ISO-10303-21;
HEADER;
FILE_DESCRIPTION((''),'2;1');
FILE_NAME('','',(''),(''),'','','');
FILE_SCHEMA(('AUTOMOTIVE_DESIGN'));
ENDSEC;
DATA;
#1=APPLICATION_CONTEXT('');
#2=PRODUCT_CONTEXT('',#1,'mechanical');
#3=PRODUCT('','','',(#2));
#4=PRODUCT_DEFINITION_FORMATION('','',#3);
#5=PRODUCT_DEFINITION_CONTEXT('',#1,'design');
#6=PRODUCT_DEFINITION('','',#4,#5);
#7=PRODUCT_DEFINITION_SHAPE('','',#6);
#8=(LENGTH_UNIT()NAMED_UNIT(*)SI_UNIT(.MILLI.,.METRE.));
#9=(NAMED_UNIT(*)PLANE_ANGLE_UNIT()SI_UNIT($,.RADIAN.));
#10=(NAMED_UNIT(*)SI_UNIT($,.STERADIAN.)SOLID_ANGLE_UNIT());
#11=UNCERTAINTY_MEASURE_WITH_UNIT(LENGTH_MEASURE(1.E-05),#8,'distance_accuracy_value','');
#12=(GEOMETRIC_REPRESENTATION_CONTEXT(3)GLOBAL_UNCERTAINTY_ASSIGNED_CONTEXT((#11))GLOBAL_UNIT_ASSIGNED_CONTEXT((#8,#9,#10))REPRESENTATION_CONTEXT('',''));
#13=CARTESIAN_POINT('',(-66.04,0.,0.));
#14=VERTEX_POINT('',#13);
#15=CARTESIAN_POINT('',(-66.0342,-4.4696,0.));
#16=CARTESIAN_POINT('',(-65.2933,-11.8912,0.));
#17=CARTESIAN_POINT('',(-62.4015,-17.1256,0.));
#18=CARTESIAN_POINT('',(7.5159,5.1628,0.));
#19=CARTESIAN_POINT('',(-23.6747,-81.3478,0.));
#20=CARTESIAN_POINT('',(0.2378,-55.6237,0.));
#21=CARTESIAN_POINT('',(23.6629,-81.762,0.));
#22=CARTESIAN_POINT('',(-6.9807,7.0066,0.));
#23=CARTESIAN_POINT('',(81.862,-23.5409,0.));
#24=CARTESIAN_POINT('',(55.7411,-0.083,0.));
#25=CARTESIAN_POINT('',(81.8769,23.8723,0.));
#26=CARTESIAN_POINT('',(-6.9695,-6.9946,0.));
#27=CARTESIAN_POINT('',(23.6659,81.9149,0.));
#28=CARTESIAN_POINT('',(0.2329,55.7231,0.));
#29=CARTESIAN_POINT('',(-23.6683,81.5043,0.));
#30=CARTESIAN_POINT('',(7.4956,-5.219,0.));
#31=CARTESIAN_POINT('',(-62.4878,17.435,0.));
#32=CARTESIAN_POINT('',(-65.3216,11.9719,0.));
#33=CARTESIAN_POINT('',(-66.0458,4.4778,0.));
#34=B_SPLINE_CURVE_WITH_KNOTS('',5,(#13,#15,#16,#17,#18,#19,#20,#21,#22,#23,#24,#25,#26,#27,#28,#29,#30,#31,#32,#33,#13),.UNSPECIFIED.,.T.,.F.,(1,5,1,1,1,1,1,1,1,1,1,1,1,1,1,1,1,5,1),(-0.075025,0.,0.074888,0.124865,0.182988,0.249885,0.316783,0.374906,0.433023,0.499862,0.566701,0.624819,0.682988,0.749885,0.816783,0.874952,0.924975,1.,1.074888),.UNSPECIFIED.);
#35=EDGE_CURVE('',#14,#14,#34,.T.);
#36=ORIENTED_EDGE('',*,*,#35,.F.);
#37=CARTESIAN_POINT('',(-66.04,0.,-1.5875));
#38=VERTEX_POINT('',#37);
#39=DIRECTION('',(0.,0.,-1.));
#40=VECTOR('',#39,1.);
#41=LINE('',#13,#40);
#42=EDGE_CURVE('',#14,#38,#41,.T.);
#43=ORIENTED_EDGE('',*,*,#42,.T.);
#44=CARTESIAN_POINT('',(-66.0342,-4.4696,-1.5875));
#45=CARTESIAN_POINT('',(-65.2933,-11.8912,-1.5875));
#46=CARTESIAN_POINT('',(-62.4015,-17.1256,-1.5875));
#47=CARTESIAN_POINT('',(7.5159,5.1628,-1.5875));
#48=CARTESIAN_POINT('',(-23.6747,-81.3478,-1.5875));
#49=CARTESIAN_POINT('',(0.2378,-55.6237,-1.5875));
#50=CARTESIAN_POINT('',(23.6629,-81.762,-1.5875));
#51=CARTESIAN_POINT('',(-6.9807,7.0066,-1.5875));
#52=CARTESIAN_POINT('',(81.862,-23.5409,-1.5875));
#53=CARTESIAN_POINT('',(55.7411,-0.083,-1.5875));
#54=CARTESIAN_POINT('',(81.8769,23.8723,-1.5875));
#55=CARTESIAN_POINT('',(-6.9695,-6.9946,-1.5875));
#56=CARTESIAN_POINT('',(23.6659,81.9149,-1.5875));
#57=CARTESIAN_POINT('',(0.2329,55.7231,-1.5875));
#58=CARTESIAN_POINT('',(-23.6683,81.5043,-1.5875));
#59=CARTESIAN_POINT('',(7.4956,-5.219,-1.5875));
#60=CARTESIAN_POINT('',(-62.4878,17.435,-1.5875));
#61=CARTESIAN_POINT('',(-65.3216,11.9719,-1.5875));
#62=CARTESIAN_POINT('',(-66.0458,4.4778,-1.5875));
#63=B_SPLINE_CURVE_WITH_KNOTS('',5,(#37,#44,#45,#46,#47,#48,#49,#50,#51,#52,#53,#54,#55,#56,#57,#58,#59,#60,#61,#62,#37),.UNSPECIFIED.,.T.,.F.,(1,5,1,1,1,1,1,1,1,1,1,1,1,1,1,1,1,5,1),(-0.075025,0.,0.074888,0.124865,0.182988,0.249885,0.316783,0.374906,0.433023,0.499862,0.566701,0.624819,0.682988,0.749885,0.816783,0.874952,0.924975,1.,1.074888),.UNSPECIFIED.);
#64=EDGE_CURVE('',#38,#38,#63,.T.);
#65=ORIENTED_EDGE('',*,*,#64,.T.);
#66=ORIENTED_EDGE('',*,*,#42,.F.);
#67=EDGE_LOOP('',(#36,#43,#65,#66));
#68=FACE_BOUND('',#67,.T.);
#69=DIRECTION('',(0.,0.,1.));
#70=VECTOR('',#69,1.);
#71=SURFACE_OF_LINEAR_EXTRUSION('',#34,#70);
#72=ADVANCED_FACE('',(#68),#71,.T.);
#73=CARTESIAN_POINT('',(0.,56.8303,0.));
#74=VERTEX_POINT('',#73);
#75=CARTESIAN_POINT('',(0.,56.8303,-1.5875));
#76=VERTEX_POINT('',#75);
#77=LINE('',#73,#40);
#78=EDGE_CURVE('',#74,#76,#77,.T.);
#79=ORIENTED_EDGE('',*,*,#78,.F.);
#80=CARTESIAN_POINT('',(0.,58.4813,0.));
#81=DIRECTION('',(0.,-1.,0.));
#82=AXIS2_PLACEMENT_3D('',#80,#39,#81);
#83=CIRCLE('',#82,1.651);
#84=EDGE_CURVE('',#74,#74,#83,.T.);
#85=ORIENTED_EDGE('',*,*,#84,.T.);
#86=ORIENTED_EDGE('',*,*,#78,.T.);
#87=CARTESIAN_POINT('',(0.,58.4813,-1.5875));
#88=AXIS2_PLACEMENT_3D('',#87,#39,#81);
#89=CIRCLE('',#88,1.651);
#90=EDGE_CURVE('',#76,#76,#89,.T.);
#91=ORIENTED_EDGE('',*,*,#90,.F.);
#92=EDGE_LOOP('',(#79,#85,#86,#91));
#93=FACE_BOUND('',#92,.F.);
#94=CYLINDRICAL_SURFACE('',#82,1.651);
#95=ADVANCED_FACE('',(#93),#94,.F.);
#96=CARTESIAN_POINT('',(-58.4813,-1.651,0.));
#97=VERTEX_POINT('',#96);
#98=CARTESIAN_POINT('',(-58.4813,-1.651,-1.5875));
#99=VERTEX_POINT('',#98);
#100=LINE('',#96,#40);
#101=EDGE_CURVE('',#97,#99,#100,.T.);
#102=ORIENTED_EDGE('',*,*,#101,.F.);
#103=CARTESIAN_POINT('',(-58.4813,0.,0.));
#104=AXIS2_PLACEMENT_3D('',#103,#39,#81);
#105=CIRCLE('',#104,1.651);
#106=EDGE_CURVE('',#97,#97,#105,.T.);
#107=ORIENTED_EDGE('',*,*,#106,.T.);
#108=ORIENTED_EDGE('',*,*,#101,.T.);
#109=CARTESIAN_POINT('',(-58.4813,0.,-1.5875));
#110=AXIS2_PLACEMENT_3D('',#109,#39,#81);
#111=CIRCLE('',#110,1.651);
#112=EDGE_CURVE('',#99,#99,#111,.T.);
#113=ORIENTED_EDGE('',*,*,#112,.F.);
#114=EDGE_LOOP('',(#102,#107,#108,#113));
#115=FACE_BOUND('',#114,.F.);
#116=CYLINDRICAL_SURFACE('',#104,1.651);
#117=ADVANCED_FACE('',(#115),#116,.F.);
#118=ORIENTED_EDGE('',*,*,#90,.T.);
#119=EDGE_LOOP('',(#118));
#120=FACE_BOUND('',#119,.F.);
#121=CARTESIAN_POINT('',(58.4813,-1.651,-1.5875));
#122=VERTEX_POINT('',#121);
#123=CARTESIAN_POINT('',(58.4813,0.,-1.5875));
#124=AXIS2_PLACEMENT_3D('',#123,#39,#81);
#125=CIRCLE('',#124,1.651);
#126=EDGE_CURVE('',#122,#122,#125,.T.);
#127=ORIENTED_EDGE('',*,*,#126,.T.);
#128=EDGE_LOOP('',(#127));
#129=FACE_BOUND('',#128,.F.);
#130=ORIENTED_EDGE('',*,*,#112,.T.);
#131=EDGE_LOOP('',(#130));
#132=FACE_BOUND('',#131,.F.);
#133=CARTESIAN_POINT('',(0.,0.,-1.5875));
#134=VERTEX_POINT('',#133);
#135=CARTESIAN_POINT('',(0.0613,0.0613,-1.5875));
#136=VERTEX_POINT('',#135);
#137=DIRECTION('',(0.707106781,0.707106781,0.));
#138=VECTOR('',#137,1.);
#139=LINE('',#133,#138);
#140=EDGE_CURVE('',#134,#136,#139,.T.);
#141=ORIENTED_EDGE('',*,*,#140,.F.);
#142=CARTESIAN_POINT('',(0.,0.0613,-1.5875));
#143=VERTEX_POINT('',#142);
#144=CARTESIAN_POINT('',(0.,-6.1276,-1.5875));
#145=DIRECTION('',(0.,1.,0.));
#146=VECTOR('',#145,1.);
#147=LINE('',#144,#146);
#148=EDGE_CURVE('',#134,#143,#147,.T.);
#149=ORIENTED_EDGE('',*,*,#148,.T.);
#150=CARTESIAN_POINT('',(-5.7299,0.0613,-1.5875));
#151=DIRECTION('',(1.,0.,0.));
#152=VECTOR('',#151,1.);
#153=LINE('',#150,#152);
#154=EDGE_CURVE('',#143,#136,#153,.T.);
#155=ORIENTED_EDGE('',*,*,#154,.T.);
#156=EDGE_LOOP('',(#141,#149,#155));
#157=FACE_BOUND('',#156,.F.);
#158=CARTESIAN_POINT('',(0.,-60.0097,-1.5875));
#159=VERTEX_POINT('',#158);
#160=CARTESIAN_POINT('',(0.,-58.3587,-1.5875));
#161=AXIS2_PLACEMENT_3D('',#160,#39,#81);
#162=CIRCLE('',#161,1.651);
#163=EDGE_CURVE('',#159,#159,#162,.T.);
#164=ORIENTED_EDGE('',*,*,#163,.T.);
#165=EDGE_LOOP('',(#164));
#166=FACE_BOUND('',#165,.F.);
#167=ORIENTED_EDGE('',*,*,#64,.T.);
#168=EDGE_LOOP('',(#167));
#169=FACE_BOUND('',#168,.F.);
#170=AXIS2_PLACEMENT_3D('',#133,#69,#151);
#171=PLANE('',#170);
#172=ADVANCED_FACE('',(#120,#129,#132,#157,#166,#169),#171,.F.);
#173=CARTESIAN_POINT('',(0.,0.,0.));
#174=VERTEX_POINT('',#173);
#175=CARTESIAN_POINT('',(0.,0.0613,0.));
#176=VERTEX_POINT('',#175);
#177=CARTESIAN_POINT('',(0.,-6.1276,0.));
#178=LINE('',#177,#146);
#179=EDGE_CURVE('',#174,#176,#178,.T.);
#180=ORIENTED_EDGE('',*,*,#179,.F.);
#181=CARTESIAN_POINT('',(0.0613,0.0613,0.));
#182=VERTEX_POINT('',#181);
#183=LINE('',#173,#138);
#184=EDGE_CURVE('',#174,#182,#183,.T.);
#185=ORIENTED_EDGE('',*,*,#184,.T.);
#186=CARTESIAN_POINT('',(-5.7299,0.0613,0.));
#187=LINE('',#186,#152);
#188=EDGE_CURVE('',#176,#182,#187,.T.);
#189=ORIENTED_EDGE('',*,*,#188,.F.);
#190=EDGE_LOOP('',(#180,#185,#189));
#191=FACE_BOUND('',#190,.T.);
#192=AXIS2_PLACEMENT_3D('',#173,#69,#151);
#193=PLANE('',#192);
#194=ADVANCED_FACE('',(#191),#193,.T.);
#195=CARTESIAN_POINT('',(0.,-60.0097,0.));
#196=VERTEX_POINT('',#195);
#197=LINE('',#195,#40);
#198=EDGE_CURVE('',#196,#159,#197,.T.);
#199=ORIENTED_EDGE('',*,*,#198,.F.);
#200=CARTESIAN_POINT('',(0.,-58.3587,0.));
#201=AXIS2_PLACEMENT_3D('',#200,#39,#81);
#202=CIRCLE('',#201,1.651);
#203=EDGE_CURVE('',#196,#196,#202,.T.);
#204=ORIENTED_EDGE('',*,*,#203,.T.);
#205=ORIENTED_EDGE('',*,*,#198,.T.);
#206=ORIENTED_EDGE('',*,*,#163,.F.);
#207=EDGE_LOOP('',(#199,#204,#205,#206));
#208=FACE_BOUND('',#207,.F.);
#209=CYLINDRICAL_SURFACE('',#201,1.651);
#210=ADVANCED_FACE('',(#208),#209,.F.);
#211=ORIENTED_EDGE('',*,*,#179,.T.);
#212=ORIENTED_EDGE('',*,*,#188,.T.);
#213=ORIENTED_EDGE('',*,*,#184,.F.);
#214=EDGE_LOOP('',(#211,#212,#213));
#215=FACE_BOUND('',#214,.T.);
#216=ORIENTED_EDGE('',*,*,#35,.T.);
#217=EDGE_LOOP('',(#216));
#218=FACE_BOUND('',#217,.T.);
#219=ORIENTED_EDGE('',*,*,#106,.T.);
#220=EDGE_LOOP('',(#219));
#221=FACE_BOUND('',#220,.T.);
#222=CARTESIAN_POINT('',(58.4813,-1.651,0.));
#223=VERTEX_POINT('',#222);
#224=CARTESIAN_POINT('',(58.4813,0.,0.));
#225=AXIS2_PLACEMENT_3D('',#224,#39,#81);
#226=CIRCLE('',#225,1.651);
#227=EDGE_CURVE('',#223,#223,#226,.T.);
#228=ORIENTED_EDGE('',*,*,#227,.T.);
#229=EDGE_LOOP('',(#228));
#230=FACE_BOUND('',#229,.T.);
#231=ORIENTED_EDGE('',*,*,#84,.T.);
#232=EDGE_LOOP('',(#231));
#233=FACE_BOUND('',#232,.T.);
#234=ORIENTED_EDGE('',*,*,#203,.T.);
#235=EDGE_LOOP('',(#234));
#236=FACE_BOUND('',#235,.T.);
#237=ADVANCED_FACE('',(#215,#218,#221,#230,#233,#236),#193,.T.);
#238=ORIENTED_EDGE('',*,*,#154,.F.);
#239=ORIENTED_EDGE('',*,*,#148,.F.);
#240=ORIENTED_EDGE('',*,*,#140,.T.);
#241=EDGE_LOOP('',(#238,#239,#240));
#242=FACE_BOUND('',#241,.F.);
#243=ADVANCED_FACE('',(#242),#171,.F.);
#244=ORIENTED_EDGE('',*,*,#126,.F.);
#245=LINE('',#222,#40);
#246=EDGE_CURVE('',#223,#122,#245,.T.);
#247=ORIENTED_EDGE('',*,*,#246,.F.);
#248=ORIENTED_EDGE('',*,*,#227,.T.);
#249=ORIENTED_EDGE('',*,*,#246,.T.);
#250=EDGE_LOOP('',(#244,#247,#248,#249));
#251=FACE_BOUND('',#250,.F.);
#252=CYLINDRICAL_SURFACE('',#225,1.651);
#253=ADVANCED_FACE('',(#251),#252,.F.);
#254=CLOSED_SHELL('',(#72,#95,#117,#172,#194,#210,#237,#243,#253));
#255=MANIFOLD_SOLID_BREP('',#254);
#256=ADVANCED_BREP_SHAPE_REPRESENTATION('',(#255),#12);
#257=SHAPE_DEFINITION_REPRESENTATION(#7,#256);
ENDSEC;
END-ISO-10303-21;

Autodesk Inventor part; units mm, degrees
ref_plane "YZ Plane" through (0, 0, 0) normal (1, 0, 0) x (0, 1, 0)
ref_plane "XZ Plane" through (0, 0, 0) normal (0, 1, 0) x (-1, 0, 0)
ref_plane "XY Plane" through (0, 0, 0) normal (0, 0, 1) x (1, 0, 0)
sketch "Sketch1" plane through (0, 0, 0) normal (0, 0, 1) x (1, 0, 0)
  spline S0 degree 5 poles (-66.04, 0) (-66.0342, -4.4696) (-65.2933, -11.8912) (-62.4015, -17.1256) (7.5159, 5.1628) (-23.6747, -81.3478) (0.2378, -55.6237) (23.6629, -81.762) (-6.9807, 7.0066) (81.862, -23.5409) (55.7411, -0.083) (81.8769, 23.8723) (-6.9695, -6.9946) (23.6659, 81.9149) (0.2329, 55.7231) (-23.6683, 81.5043) (7.4956, -5.219) (-62.4878, 17.435) (-65.3216, 11.9719) (-66.0458, 4.4778) (-66.04, 0) knots 0 0 0 0 0 0 0.074888 0.124865 0.182988 0.249885 0.316783 0.374906 0.433023 0.499862 0.566701 0.624819 0.682988 0.749885 0.816783 0.874952 0.924975 1 1 1 1 1 1
  line L0 (0, -6.1276) -> (0, 6.2502)
  line L1 (-5.7299, 0.0613) -> (8.1185, 0.0613)
  line L2 (0, 0) -> (10.1713, 10.1713)
  line L3 (0, 0) -> (14.3844, 0) construction
  point P0 (-18.941, -18.8184)
  point P1 (-10.1713, -63.1849)
  point P2 (0, -65.9787)
  point P3 (10.1713, -63.1849)
  point P4 (18.941, -18.8184)
  point P5 (63.3074, -10.0487)
  point P6 (66.04, 0)
  point P7 (63.3074, 10.1713)
  point P8 (18.941, 18.941)
  point P9 (10.1713, 63.3074)
  point P10 (0, 66.1013)
  point P11 (-10.1713, 63.3074)
  point P12 (-18.941, 18.941)
  point P13 (-63.3074, 10.1713)
  point P14 (0, 58.4813)
  point P15 (58.4813, 0)
  point P16 (0, -58.3587)
  point P17 (-58.4813, 0)
  dimension "d0" = 132.08
  dimension "d1" = 132.08
  dimension "d2" = 45
  dimension "d14" = 58.42
extrude "Extrusion1" add sketch "Sketch1" against normal blind 1.5875 contours S0 | L0 L1 L2
hole "Hole1" at (0, 58.4813, 0) at (58.4813, 0, 0) at (0, -58.3587, 0) at (-58.4813, 0, 0) direction (0, 0, -1) diameter 3.302 end through all thread size "8-32 UNC" class "2B" standard "ANSI Unified Screw Threads"
equation "\"d1\" = d0"
properties part number "TopPlate"
